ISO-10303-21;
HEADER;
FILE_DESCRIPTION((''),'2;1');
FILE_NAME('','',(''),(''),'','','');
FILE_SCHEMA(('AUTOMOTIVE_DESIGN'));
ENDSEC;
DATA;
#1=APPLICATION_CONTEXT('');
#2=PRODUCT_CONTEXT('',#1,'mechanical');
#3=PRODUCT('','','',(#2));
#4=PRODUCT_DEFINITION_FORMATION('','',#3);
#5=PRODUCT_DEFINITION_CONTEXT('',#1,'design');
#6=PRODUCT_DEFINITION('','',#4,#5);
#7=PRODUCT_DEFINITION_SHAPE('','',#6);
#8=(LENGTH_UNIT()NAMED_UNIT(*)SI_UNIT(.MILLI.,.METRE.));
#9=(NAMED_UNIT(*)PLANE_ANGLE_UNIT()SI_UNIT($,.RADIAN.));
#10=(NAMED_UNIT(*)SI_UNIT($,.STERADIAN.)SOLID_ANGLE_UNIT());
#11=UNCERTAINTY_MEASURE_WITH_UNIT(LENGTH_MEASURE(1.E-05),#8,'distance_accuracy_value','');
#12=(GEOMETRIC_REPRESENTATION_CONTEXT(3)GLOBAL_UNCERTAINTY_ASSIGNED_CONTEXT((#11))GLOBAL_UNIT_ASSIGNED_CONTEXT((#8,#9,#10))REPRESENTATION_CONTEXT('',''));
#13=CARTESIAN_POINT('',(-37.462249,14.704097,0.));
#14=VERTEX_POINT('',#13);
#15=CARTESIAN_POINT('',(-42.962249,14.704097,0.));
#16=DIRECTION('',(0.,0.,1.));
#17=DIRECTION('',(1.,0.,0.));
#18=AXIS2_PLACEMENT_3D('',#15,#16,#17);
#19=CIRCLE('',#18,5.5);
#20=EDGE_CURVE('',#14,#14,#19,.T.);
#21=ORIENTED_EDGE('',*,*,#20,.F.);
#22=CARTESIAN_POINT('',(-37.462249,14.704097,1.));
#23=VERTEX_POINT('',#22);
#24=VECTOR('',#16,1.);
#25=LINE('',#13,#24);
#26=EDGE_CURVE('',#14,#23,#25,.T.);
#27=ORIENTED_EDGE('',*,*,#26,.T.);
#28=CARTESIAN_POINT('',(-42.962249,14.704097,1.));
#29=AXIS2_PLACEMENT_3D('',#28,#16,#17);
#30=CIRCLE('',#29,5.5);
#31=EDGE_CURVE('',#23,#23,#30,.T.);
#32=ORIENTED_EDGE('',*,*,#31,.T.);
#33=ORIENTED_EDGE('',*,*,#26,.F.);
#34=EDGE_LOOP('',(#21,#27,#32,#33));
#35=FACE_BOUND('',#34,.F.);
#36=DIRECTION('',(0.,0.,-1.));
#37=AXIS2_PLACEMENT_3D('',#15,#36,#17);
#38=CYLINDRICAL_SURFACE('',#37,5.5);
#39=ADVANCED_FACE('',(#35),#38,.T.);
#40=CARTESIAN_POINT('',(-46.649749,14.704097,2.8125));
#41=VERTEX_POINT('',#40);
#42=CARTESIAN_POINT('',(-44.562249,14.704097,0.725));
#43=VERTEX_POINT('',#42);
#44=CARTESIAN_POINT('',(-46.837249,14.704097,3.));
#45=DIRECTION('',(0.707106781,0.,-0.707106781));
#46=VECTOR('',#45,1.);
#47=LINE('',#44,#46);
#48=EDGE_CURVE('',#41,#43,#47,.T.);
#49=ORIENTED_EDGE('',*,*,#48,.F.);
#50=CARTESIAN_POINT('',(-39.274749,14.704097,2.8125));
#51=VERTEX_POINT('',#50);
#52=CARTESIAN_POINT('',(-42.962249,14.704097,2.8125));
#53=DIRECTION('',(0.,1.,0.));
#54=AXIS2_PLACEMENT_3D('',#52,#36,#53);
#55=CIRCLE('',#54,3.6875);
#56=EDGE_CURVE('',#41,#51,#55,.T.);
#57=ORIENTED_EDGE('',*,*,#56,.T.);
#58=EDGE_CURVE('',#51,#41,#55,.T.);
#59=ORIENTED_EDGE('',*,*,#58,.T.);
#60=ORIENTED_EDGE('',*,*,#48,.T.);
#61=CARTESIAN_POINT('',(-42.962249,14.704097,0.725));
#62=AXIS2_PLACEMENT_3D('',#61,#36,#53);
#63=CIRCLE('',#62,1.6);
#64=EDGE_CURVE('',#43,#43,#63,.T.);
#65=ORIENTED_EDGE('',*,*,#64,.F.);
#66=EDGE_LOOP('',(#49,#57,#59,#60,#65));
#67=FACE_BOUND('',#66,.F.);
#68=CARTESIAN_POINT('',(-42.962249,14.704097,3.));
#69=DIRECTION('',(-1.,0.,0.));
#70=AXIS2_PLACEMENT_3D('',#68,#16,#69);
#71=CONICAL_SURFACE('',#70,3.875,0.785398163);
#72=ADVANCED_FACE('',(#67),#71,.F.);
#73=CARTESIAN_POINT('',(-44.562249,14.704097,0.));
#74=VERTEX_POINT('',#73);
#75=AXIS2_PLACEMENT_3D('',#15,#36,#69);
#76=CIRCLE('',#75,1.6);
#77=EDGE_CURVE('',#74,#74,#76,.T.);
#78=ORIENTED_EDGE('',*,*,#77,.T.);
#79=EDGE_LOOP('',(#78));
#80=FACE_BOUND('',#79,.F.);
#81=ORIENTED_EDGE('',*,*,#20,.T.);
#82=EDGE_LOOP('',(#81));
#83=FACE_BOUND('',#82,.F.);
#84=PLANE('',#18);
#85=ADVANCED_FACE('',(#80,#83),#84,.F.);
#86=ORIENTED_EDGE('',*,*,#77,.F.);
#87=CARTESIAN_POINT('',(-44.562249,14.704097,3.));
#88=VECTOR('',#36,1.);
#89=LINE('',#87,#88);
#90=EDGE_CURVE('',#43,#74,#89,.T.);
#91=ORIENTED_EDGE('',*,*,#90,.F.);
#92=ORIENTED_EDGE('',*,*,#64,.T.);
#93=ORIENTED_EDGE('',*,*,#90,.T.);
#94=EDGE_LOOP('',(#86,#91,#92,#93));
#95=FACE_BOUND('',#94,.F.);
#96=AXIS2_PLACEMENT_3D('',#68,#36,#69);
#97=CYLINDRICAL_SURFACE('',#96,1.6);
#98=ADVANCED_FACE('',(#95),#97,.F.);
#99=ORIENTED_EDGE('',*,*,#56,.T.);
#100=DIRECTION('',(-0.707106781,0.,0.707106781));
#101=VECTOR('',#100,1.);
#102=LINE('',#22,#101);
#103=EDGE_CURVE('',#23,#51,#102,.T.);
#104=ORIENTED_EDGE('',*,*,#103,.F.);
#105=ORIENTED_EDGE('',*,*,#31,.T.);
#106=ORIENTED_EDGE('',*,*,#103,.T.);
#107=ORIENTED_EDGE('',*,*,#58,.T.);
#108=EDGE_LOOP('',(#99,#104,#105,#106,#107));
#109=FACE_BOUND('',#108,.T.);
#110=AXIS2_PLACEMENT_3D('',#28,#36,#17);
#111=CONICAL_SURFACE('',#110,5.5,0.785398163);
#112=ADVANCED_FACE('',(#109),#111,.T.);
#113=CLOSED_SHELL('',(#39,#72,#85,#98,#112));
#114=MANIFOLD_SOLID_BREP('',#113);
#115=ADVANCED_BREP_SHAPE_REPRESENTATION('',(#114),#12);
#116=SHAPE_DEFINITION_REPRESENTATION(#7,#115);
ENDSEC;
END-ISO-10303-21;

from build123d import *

# Parameters (mm, degrees)
F0_R           = 5.5
F1_DEPTH       = 3
F3_D           = 3.2
F3_DEPTH       = 12
F3_CSINK_D     = 7.75
F3_CSINK_ANGLE = 90
F3_TIP         = 0.9613769904


# Not quite as in the source:
# - a fillet or chamfer that OpenCascade refuses, or shapes differently, is made with other operations: its cross-section is extruded or revolved along the edge and cut away or added


with BuildPart() as f1:
    # F0 (on Top) → F1 (new body)
    with BuildSketch(Plane.XY):
        with Locations((-42.9622493684, 14.7040970623)):
            Circle(F0_R)
    extrude(amount=F1_DEPTH)

    # F3
    with Locations(Plane.XY.offset(3)):
        with Locations((-42.9622493684, 14.7040970623)):
            CounterSinkHole(F3_D / 2, F3_CSINK_D / 2, depth=F3_DEPTH, counter_sink_angle=F3_CSINK_ANGLE)
            with Locations((0, 0, -(F3_DEPTH + F3_TIP / 2))):  # 118° drill point
                Cone(0, F3_D / 2, F3_TIP, mode=Mode.SUBTRACT)

    # F4: chamfer of 2 on 1 edges, made by hand

    # F4_s1 → F4_t2 (revolve, cut)
    with BuildSketch(Plane.XZ.offset(-14.7040970623)):
        Polygon((-37.4622493684, 1), (-39.4622493684, 3), (-37.4622493684, 3), align=None)
    revolve(axis=Axis((-42.9622493684, 14.7040970623, 3), (0, 0, 1)), mode=Mode.SUBTRACT)


solid = f1.part
